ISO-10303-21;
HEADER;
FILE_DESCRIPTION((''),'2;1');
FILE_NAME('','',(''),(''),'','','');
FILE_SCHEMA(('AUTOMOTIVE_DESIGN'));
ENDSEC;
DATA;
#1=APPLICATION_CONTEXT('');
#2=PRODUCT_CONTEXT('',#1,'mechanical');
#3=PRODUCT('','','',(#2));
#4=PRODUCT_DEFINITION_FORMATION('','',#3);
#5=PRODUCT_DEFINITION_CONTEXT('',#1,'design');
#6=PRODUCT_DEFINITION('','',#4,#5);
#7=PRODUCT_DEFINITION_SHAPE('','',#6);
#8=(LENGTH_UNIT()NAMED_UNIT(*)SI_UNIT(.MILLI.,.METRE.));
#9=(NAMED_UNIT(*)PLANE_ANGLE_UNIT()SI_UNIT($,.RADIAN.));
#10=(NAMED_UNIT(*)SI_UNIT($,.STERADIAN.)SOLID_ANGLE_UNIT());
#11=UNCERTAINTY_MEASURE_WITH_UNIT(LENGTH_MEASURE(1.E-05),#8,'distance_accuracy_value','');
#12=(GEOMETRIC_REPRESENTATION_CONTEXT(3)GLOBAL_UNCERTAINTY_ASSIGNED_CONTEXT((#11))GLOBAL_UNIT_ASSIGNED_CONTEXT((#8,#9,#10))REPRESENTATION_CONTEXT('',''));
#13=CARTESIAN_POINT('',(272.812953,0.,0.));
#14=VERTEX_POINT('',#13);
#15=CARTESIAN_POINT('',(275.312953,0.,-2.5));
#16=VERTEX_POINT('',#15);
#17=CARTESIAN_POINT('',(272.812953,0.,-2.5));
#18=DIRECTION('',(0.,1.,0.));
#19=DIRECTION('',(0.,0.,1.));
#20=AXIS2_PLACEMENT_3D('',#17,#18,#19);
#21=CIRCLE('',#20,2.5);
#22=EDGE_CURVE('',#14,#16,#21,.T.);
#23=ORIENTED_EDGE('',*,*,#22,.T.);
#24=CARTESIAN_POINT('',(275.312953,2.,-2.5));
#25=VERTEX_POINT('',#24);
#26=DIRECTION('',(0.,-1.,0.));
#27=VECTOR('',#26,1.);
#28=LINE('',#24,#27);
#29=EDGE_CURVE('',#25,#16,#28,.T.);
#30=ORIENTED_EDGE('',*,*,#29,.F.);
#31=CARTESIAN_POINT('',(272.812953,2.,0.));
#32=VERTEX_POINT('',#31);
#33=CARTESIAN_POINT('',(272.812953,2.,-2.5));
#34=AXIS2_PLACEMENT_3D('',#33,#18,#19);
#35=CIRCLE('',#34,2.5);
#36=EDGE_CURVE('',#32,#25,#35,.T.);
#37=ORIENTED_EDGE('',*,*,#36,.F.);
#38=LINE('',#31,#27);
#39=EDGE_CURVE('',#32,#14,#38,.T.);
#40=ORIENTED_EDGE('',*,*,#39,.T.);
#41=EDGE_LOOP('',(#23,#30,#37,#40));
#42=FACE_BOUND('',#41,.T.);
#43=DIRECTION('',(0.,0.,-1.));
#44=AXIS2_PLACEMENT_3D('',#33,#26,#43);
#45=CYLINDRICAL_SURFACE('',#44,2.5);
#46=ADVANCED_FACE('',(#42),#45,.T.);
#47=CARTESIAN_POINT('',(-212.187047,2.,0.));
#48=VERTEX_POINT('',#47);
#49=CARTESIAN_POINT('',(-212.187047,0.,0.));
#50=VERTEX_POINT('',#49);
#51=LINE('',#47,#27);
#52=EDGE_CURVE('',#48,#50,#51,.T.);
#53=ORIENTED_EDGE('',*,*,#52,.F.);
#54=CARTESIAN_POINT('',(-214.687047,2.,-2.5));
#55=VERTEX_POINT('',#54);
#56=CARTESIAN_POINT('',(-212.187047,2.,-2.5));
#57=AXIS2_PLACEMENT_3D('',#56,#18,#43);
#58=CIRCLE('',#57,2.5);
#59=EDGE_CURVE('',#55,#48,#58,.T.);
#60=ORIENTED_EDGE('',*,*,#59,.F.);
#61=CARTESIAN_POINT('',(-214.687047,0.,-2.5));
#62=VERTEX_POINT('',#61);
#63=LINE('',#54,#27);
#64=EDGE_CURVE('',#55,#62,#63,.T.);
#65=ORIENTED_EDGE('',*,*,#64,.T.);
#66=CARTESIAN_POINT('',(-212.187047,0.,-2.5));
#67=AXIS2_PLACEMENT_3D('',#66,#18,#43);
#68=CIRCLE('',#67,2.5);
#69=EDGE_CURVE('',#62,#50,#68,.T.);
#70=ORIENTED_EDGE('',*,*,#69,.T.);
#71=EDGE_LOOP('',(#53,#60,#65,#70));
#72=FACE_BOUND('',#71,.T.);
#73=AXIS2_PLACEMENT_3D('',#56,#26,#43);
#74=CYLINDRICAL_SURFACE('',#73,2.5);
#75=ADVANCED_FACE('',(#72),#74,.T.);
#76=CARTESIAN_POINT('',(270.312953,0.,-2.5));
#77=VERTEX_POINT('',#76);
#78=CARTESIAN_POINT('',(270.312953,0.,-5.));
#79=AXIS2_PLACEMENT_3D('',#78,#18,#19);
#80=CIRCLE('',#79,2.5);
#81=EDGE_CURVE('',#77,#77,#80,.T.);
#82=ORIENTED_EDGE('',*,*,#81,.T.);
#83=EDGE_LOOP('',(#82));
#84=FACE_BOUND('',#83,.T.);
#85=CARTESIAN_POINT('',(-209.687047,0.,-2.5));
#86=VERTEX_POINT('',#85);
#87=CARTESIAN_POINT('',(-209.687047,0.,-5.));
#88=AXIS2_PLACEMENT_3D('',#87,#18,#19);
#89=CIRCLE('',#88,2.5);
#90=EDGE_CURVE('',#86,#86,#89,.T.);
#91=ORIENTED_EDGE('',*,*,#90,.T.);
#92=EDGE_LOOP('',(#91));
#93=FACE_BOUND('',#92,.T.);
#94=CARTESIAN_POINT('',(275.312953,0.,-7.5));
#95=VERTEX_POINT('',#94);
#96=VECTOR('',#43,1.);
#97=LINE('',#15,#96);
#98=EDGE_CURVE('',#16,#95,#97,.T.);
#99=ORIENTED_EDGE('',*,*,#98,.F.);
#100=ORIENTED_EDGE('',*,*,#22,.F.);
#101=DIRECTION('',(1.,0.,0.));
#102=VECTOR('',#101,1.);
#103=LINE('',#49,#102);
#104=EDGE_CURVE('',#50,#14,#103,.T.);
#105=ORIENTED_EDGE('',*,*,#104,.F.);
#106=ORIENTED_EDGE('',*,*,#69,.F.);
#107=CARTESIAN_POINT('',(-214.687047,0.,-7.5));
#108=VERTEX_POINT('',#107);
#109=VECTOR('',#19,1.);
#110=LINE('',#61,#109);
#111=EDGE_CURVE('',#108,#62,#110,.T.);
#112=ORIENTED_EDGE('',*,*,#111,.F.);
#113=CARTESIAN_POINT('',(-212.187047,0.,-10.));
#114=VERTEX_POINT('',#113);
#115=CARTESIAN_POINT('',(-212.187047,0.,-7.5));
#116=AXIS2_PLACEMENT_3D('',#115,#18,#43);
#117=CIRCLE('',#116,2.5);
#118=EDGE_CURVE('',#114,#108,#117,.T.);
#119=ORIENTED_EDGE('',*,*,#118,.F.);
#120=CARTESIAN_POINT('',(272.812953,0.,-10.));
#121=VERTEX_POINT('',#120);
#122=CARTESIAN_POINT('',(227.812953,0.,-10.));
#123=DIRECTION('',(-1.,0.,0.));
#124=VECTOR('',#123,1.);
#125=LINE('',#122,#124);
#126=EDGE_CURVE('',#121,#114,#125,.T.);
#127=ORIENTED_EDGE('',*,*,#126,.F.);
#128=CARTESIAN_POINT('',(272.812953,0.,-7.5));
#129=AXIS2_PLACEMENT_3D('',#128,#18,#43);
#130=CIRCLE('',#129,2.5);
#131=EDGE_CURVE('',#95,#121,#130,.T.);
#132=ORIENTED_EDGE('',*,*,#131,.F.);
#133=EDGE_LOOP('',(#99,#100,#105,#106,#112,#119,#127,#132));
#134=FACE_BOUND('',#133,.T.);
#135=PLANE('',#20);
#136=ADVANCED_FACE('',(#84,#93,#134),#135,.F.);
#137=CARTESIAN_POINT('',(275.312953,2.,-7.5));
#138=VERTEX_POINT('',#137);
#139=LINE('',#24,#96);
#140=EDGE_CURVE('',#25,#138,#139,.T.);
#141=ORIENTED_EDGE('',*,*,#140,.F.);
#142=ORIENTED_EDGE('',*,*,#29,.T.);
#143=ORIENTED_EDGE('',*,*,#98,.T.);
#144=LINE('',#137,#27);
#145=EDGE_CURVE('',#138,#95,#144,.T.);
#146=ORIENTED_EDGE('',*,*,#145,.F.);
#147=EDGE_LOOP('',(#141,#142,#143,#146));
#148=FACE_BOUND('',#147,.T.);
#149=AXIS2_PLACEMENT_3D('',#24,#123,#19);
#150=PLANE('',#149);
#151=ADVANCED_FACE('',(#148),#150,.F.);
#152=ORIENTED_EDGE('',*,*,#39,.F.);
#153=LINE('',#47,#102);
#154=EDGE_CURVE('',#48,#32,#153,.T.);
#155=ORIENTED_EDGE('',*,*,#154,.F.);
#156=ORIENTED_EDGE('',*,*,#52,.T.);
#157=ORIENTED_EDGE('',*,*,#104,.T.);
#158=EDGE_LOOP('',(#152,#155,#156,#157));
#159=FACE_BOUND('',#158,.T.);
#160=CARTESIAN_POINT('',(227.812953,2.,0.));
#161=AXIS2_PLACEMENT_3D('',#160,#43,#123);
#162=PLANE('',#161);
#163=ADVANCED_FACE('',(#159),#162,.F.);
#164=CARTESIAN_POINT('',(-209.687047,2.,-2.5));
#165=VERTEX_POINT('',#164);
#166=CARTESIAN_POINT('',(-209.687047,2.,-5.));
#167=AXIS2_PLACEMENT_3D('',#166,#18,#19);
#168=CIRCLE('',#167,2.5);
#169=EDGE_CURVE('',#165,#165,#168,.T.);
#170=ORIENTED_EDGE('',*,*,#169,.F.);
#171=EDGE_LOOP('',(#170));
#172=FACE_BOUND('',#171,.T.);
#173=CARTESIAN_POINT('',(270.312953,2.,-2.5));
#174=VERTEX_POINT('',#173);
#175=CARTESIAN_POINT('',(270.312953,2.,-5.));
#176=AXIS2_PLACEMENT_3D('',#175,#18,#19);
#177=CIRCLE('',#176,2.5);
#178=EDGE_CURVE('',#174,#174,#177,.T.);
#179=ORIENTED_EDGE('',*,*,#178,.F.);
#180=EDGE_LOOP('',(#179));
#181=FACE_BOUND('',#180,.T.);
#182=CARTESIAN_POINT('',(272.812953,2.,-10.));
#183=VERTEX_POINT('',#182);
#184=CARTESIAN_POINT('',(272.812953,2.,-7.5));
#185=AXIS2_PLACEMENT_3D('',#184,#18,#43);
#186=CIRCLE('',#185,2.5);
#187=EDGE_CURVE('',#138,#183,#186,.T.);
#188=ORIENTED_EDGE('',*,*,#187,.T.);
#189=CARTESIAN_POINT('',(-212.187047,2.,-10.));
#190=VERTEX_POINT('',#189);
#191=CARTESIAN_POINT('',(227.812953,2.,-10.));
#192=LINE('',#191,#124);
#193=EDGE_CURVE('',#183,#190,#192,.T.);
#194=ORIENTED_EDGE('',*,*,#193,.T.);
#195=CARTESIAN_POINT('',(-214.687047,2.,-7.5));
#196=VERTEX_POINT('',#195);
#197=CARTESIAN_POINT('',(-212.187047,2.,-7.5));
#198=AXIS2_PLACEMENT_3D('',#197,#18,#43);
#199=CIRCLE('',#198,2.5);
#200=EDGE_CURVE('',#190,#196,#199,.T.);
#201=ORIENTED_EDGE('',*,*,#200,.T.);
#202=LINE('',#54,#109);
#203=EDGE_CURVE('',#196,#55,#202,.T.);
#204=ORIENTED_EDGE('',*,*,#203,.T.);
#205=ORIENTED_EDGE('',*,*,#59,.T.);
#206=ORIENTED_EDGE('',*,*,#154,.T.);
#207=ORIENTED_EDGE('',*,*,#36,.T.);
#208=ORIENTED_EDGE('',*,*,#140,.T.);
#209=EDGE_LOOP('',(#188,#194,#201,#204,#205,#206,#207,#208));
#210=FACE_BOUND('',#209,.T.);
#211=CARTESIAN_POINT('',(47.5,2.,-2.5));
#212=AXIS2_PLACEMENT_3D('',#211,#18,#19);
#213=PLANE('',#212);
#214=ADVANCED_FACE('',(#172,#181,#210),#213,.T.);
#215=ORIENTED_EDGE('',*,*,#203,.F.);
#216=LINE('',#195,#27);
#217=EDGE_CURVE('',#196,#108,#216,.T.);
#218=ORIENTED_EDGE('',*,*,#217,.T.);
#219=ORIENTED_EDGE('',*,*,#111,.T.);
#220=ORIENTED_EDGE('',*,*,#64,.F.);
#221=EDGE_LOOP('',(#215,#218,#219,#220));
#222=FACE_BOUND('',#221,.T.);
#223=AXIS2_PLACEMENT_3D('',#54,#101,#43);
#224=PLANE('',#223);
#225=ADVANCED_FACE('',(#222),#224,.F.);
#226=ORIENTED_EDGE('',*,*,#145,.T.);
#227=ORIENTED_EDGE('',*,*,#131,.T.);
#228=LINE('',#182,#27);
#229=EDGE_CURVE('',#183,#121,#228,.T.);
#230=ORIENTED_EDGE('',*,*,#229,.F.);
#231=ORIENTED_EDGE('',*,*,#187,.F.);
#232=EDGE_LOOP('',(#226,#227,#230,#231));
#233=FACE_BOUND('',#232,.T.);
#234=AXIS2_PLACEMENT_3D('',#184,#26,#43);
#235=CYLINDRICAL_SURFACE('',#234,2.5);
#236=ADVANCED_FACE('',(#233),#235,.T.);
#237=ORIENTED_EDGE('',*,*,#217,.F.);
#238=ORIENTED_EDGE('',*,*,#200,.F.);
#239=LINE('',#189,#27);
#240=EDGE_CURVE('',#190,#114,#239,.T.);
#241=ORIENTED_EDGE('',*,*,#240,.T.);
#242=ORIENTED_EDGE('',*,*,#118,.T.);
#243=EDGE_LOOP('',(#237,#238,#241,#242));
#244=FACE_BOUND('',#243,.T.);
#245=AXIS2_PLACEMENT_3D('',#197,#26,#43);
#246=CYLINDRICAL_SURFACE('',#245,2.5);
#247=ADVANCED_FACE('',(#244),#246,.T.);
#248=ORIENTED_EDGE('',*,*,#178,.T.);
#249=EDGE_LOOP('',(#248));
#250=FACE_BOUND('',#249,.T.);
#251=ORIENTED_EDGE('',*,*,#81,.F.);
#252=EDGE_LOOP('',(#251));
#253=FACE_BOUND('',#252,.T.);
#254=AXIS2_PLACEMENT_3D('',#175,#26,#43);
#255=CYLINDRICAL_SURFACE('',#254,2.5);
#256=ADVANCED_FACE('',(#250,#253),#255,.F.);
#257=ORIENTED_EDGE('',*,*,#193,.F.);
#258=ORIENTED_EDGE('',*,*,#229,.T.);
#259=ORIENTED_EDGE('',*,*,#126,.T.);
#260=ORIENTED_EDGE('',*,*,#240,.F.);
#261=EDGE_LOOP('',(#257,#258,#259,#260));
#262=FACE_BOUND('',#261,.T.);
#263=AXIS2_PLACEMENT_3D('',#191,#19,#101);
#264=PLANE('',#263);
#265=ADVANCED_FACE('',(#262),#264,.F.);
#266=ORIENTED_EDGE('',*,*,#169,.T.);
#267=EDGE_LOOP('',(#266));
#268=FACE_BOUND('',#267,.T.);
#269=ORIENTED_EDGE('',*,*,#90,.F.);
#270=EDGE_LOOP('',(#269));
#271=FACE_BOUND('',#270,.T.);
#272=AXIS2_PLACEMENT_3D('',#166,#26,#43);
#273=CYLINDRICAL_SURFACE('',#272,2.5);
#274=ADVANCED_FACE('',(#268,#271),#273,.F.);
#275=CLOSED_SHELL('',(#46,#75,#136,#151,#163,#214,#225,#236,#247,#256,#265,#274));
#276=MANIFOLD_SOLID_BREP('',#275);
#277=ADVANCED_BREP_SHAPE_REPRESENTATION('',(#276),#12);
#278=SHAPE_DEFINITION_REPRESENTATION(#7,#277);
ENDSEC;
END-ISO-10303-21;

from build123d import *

# Parameters (mm, degrees)
SKETCH1_R           = 2.5
BOSS_EXTRUDE2_DEPTH = 2
FLEX1_OUTLINE_R     = 2.5
FLEX1_DEPTH         = 2


# Read off the part's stored shape, not the designer's step: Flex1
with BuildPart() as part:
    # Sketch1 → Boss-Extrude2 (new body)
    with BuildSketch(Plane(origin=(0, 0, 0), x_dir=(1, 0, 0), z_dir=(0, 1, 0))):
        with BuildLine():
            Line((2.5, 0), (47.5, 0))
            ThreePointArc((47.5, 0), (49.267766953, 0.732233047), (50, 2.5))
            Line((50, 2.5), (50, 7.5))
            ThreePointArc((50, 7.5), (49.267766953, 9.267766953), (47.5, 10))
            Line((47.5, 10), (2.5, 10))
            ThreePointArc((2.5, 10), (0.732233047, 9.267766953), (0, 7.5))
            Line((0, 7.5), (0, 2.5))
            ThreePointArc((0, 2.5), (0.732233047, 0.732233047), (2.5, 0))
        make_face()
        with Locations(Location((5, 5, 0), (0, 0, 270))):
            Circle(SKETCH1_R, mode=Mode.SUBTRACT)
        with Locations(Location((45, 5, 0), (0, 0, 270))):
            Circle(SKETCH1_R, mode=Mode.SUBTRACT)
    extrude(amount=BOSS_EXTRUDE2_DEPTH)

    # Flex1 outline → Flex1 (add)
    # profile 1 of 4: a face of its own
    with BuildSketch(Plane(origin=(0, 0, 0), x_dir=(1, 0, 0), z_dir=(0, 1, 0))):
        with BuildLine():
            Line((2.5, 10), (-212.187046933, 10))
            ThreePointArc((-212.187046933, 10), (-213.954813886, 9.267766953), (-214.687046933, 7.5))
            Line((-214.687046933, 7.5), (-214.687046933, 2.5))
            ThreePointArc((-214.687046933, 2.5), (-213.954813886, 0.732233047), (-212.187046933, 0))
            Line((-212.187046933, 0), (2.5, 0))
            ThreePointArc((2.5, 0), (0.732233047, 0.732233047), (0, 2.5))
            Line((0, 2.5), (0, 7.5))
            ThreePointArc((0, 7.5), (0.732233047, 9.267766953), (2.5, 10))
        make_face()
        with Locations((-209.687046933, 5)):
            Circle(FLEX1_OUTLINE_R, mode=Mode.SUBTRACT)
    # profile 2 of 4: a face of its own
    with BuildSketch(Plane(origin=(0, 0, 0), x_dir=(1, 0, 0), z_dir=(0, 1, 0))):
        with BuildLine():
            Line((272.812953067, 10), (47.5, 10))
            ThreePointArc((47.5, 10), (49.267766953, 9.267766953), (50, 7.5))
            Line((50, 7.5), (50, 2.5))
            ThreePointArc((50, 2.5), (49.267766953, 0.732233047), (47.5, 0))
            Line((47.5, 0), (272.812953067, 0))
            ThreePointArc((272.812953067, 0), (274.58072002, 0.732233047), (275.312953067, 2.5))
            Line((275.312953067, 2.5), (275.312953067, 7.5))
            ThreePointArc((275.312953067, 7.5), (274.58072002, 9.267766953), (272.812953067, 10))
        make_face()
        with Locations((270.312953067, 5)):
            Circle(FLEX1_OUTLINE_R, mode=Mode.SUBTRACT)
    # profile 3 of 4: a face of its own
    with BuildSketch(Plane(origin=(0, 0, 0), x_dir=(1, 0, 0), z_dir=(0, 1, 0))):
        with Locations((5, 5)):
            Circle(FLEX1_OUTLINE_R)
    # profile 4 of 4: a face of its own
    with BuildSketch(Plane(origin=(0, 0, 0), x_dir=(1, 0, 0), z_dir=(0, 1, 0))):
        with Locations((45, 5)):
            Circle(FLEX1_OUTLINE_R)
    extrude(amount=FLEX1_DEPTH)


solid = part.part
